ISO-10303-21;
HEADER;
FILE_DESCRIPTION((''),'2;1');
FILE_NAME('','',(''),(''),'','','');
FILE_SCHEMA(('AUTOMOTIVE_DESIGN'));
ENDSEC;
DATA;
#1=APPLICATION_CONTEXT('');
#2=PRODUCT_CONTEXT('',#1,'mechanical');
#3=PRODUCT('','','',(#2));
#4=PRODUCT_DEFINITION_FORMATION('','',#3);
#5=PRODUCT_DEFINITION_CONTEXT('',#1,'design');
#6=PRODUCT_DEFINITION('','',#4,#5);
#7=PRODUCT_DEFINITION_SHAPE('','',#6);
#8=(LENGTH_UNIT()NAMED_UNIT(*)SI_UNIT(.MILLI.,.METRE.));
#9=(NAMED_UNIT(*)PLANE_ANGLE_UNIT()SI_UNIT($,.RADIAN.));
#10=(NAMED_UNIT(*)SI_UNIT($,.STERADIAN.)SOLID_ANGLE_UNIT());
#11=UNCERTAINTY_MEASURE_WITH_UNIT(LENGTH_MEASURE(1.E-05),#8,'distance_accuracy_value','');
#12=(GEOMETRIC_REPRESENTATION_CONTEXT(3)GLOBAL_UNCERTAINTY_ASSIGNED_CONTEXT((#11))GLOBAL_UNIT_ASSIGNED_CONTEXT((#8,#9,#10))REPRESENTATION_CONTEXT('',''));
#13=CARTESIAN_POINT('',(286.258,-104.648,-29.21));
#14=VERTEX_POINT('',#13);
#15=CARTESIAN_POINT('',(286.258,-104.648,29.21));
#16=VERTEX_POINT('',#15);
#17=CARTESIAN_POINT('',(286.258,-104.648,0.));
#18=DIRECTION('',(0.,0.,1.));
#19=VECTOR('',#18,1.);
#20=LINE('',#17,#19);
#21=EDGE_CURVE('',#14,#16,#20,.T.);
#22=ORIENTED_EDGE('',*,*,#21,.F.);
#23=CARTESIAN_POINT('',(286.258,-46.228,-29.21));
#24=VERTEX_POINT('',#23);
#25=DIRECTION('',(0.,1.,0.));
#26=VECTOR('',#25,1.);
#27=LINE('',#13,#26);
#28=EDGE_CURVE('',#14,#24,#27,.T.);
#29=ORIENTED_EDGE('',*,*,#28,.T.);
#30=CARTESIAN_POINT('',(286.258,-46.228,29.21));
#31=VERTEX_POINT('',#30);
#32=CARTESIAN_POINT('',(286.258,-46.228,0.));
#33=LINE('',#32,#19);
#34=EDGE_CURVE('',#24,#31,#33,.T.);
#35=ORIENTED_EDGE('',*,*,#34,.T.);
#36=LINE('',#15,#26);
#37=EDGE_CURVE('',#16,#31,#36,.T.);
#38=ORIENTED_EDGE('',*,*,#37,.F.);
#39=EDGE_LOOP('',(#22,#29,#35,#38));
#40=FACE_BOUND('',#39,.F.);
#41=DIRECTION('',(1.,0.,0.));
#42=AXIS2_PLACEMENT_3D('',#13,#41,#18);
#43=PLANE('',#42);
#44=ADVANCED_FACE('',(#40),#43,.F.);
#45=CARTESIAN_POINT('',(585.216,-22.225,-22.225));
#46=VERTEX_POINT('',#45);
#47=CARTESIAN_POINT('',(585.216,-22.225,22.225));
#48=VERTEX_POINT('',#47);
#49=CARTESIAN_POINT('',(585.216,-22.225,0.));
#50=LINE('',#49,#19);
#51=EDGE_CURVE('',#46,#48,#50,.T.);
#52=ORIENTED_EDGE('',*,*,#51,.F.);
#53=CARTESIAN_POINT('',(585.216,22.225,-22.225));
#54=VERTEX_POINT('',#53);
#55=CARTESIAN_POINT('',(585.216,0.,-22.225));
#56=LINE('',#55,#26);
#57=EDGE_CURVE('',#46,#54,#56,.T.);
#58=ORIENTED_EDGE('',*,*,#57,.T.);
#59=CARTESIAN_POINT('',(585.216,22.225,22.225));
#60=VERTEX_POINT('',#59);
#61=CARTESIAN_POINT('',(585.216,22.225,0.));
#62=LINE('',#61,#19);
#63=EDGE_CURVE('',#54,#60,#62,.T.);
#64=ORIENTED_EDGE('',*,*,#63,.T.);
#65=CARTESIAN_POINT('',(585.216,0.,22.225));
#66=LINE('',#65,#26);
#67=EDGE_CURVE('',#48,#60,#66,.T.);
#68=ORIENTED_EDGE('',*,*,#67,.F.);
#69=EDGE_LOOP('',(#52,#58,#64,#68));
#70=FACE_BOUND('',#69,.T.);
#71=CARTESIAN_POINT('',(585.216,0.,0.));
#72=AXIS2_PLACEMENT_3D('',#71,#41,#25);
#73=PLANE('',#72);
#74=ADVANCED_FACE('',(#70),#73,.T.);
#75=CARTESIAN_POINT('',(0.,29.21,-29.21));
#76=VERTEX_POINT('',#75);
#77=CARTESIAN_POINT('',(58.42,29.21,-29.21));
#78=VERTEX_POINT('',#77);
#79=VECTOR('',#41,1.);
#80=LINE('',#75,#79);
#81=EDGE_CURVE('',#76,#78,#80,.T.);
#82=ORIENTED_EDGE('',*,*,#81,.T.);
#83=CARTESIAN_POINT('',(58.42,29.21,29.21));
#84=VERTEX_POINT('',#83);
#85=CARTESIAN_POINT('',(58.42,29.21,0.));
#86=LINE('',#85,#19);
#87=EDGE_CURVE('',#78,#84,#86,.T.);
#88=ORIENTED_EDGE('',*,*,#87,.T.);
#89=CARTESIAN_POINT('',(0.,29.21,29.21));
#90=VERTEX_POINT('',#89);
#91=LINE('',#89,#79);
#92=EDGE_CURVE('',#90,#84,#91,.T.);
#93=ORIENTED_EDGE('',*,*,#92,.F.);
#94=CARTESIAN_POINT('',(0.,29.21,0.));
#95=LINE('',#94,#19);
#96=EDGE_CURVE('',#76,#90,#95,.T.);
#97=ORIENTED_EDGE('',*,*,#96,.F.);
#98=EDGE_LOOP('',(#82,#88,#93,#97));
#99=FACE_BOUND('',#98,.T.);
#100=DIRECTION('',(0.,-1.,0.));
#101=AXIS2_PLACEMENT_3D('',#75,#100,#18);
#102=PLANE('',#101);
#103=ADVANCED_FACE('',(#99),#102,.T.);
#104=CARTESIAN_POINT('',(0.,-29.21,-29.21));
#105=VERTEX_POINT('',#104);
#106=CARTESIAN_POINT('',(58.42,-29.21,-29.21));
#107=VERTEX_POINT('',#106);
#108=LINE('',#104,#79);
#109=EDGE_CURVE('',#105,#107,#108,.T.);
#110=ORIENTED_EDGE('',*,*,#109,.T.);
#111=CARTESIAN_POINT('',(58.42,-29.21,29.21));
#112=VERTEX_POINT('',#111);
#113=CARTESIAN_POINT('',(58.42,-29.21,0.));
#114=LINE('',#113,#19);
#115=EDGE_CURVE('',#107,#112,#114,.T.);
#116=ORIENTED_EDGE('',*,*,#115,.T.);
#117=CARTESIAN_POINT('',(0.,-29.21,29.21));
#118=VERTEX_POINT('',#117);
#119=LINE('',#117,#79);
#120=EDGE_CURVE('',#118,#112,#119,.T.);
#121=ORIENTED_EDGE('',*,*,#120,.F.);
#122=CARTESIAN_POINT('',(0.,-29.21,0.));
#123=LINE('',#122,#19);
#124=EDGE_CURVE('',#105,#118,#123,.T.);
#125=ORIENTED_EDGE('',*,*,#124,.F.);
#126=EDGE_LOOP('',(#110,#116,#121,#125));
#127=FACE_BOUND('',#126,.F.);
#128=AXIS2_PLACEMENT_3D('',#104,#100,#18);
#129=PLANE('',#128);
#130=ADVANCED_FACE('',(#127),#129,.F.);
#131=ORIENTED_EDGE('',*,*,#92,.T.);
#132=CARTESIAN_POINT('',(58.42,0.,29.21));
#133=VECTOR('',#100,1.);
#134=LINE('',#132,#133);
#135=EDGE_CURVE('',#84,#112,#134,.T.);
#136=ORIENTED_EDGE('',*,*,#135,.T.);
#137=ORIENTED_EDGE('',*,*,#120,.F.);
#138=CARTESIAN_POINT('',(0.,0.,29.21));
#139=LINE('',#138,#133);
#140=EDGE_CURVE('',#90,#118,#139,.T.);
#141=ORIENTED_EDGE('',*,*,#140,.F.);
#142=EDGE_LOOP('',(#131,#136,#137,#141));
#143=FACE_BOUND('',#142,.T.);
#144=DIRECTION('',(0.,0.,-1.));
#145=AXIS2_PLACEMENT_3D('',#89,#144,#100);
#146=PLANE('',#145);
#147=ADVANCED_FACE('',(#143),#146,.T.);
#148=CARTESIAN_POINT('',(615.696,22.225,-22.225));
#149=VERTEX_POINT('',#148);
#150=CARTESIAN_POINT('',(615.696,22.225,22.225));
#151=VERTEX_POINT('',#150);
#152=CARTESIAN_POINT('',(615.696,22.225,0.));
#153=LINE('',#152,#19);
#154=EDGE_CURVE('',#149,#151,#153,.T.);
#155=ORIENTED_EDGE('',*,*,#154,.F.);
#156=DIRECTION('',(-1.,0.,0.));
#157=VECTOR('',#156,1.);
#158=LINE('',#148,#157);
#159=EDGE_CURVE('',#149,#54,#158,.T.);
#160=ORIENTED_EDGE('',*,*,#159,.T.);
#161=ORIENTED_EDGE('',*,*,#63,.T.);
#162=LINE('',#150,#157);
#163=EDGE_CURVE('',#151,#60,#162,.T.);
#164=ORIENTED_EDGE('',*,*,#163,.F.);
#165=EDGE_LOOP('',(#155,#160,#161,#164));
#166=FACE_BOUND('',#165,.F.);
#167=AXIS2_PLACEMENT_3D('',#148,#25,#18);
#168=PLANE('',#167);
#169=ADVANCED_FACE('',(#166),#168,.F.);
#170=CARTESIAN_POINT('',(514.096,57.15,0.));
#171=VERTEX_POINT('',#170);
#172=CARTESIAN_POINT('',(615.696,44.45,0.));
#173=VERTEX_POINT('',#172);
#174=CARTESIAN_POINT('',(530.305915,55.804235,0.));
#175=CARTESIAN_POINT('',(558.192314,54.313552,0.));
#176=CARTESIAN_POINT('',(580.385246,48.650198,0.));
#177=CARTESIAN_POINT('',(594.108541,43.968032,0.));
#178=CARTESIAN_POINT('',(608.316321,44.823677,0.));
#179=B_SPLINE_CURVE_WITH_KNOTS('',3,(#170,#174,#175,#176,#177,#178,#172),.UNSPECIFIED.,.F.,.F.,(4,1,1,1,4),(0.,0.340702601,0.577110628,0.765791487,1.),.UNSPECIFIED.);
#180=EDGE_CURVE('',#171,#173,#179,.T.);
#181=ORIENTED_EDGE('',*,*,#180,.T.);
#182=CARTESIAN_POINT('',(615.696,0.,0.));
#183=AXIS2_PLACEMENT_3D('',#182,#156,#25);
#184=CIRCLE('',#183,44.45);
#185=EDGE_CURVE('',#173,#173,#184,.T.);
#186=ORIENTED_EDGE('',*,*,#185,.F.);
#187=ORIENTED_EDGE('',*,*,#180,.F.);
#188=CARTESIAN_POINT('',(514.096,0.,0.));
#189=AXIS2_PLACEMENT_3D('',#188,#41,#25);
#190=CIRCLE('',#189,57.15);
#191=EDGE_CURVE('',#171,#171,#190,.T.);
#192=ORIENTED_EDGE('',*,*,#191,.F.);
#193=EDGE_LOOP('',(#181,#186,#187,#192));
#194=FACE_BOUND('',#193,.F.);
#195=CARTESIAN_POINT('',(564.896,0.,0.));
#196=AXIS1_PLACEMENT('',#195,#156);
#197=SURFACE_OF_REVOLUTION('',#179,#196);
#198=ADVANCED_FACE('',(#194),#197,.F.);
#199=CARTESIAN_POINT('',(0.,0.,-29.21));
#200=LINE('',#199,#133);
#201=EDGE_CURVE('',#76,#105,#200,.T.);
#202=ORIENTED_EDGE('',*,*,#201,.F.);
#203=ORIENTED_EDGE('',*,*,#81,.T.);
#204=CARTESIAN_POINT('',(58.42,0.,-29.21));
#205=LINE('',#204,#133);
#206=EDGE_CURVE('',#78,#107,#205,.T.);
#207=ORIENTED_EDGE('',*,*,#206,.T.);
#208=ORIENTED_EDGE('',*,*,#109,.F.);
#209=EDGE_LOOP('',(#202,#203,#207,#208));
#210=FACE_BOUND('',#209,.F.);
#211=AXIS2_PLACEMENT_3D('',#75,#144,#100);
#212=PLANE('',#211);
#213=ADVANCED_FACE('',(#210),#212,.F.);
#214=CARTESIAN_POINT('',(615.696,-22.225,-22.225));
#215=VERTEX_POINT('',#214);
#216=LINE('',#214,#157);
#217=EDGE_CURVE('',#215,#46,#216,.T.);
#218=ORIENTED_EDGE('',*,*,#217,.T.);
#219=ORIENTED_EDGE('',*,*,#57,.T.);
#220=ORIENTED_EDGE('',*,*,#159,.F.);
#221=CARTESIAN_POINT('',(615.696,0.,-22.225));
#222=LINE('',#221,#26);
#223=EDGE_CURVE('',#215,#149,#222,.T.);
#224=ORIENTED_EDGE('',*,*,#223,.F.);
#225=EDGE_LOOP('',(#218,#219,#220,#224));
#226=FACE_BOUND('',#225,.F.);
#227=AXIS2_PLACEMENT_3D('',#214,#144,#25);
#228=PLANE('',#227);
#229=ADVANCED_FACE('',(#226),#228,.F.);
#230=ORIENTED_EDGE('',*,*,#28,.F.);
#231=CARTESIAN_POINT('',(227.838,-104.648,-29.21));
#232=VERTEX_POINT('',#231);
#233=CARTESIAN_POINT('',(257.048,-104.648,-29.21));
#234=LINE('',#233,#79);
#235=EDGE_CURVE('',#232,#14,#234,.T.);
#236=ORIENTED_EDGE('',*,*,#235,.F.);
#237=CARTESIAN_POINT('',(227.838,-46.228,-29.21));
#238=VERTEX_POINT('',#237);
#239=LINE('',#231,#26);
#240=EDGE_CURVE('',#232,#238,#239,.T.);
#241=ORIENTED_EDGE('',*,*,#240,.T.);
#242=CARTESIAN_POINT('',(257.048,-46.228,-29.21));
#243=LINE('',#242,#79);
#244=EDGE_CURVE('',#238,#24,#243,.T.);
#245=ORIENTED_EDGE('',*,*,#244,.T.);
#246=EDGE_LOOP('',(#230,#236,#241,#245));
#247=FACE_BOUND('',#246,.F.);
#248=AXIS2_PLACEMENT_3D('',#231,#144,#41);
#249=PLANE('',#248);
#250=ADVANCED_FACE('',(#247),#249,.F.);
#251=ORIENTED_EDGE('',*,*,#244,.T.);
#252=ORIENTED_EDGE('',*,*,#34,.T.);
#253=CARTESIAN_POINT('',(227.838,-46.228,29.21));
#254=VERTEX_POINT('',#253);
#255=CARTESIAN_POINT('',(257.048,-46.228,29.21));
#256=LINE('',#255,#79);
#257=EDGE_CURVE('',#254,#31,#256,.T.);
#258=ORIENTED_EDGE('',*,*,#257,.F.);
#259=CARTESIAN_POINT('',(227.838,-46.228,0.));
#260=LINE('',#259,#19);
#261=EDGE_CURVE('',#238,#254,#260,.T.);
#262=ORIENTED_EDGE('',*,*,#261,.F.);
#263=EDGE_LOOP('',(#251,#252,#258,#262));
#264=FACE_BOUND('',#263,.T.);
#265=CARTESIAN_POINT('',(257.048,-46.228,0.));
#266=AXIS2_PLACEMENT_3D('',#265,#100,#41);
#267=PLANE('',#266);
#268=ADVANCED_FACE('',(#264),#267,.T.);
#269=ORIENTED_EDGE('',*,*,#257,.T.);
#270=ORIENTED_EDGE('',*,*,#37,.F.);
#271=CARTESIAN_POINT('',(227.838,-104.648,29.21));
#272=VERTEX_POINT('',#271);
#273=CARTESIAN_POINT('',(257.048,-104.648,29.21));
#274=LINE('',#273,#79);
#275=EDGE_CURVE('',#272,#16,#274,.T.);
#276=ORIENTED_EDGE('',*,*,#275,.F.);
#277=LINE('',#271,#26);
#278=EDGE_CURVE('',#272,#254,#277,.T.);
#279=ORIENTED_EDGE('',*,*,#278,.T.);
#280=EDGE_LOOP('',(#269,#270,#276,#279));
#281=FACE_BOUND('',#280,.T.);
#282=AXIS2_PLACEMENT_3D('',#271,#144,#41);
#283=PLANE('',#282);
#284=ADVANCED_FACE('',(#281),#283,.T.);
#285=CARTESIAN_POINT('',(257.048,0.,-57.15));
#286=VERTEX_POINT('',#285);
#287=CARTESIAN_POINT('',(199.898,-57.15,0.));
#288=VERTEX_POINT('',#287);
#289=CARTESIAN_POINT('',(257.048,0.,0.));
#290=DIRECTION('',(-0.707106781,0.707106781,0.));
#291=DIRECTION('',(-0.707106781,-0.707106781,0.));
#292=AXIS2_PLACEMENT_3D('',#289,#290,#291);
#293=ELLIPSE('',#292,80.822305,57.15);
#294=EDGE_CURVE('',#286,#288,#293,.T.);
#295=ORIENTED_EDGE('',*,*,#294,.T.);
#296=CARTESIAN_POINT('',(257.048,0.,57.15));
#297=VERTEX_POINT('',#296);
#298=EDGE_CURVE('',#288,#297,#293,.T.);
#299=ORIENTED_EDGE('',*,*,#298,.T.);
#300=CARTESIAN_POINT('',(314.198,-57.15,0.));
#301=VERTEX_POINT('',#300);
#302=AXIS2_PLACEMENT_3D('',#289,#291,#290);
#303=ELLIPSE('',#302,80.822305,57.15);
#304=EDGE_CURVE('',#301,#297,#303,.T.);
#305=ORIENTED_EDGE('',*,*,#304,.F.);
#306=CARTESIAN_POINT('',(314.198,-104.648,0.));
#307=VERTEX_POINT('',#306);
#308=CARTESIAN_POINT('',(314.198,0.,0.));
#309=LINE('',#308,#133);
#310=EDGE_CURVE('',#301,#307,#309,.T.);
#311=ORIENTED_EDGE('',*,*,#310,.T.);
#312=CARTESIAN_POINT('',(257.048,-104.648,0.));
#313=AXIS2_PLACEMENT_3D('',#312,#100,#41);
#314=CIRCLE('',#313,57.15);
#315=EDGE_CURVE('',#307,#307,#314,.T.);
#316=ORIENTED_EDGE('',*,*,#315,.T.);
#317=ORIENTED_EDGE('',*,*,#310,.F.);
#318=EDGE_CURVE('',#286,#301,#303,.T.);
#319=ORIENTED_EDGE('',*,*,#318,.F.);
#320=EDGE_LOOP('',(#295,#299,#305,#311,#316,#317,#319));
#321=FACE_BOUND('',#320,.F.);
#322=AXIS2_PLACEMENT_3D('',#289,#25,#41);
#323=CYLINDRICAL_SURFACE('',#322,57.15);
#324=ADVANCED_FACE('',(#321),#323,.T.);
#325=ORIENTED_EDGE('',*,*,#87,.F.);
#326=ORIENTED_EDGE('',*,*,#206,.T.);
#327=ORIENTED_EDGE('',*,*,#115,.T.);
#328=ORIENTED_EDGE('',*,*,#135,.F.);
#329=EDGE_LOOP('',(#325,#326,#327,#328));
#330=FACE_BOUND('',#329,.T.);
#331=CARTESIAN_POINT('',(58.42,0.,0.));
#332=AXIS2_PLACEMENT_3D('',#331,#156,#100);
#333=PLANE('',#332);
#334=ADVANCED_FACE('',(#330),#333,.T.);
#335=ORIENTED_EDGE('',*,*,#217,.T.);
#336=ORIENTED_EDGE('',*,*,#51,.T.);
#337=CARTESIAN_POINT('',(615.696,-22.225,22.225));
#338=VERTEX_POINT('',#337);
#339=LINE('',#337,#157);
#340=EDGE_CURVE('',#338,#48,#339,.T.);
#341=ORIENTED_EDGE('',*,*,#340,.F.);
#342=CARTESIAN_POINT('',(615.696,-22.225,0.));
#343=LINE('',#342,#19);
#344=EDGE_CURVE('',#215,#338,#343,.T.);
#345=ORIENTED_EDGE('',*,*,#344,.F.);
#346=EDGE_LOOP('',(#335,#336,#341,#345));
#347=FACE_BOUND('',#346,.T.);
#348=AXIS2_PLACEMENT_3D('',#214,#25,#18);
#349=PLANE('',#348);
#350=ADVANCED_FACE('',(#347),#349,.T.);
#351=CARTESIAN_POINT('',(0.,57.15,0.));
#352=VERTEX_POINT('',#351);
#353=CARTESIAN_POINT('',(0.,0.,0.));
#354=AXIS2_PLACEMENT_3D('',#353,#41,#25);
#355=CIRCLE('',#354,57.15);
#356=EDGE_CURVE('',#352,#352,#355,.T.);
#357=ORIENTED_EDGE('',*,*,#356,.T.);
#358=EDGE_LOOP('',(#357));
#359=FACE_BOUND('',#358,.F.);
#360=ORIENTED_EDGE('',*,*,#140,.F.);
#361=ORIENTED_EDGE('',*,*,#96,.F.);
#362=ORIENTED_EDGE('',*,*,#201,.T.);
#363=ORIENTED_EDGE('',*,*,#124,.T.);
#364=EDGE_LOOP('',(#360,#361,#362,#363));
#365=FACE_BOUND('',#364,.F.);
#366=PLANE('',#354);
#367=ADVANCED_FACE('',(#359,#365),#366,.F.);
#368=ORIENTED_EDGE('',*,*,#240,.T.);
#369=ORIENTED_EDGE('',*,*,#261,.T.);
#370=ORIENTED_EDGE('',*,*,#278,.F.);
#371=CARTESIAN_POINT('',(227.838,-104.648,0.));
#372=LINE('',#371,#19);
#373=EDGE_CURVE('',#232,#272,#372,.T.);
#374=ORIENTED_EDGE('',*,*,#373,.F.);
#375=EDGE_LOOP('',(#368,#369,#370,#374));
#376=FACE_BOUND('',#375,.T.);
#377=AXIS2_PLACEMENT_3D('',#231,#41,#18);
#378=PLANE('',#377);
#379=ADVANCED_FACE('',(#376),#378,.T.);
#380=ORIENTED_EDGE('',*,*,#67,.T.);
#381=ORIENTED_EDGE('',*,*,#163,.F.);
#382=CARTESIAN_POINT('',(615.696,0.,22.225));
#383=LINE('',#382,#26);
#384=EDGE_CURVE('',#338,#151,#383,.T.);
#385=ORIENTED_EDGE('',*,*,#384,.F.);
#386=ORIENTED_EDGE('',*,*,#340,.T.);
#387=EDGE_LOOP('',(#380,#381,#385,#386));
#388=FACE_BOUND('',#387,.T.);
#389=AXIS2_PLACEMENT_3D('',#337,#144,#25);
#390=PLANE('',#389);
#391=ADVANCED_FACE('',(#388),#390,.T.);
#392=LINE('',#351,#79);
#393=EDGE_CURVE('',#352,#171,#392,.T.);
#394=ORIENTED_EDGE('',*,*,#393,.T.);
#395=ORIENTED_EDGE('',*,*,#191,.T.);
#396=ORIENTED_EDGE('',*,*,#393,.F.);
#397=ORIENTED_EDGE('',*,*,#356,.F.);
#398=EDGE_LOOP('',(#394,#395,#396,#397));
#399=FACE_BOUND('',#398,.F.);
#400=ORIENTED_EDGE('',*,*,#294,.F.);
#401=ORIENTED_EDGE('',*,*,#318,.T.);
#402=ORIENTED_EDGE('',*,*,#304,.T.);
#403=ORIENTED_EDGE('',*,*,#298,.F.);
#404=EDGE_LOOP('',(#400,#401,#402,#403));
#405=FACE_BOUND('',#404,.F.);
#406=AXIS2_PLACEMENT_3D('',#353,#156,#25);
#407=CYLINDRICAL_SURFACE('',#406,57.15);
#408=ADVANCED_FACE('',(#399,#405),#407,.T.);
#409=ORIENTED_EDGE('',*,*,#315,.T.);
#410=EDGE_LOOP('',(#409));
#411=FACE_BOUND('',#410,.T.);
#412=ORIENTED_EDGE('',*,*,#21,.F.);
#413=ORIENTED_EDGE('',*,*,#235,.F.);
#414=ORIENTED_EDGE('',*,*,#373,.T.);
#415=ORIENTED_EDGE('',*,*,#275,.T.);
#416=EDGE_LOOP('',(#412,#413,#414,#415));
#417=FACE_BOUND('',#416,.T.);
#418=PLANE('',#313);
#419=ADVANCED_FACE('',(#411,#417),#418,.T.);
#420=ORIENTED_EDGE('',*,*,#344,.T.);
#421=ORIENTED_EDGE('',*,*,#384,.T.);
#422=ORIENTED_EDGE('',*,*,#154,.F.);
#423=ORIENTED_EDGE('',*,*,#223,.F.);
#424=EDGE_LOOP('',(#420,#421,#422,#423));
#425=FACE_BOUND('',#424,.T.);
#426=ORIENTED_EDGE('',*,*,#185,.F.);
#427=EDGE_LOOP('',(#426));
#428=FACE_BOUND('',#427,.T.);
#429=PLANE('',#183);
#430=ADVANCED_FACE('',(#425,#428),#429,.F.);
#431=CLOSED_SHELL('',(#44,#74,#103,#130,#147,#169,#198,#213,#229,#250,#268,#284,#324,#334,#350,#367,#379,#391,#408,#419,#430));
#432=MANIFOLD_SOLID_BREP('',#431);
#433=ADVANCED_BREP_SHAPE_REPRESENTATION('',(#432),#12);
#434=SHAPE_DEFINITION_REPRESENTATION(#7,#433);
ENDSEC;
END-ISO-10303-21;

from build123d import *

# Parameters (mm, degrees)
F0_R      = 57.15
F3_DEPTH  = 514.096
F2_R      = 57.15
F5_DEPTH  = 104.648
F6_W      = 58.42
F6_H      = 58.42
F7_DEPTH  = 58.42
F8_W      = 58.42
F8_H      = 58.42
F9_DEPTH  = 58.42
F10_W     = 44.45
F10_H     = 44.45
F11_DEPTH = 30.48


# Not quite as in the source:
# - a feature names something its author has since deleted; it is built from what else it names


with BuildPart() as f3:
    # F0 (on Right) → F3 (new body)
    with BuildSketch(Plane.YZ):
        Circle(F0_R)
    extrude(amount=F3_DEPTH)

    # F1 (on Top) → F4 (revolve)
    with BuildSketch(Plane.XY):
        with BuildLine():
            Line((514.096, 57.15), (514.096, 0))
            Line((514.096, 0), (615.696, 0))
            Line((615.696, 0), (615.696, 44.45))
            add(Edge.make_bspline(
                [(514.096, 57.15), (530.3059150596, 55.8042351211), (558.1923144484, 54.3135523686), (580.3852464856, 48.6501982027), (594.1085406783, 43.9680323111), (608.3163207178, 44.8236773325), (615.696, 44.45)],
                knots=[0, 0, 0, 0, 0.3407026007, 0.5771106283, 0.7657914869, 1, 1, 1, 1], degree=3))
        make_face()
    revolve(axis=Axis((564.896, 0, 0), (-1, 0, 0)))

    # F2 (on Front) → F5 (join)
    with BuildSketch(Plane.XZ):
        with Locations((257.048, 0)):
            Circle(F2_R)
    extrude(amount=F5_DEPTH)

    # F6 (on face) → F7 (cut)
    with BuildSketch(Plane(origin=(0, 0, 0), x_dir=(0, -1, 0), z_dir=(-1, 0, 0))):
        Rectangle(F6_W, F6_H)
    extrude(amount=-F7_DEPTH, mode=Mode.SUBTRACT)

    # F8 (on face) → F9 (cut)
    with BuildSketch(Plane.XZ.offset(104.648)):
        with Locations((257.048, 0)):
            Rectangle(F8_W, F8_H)
    extrude(amount=-F9_DEPTH, mode=Mode.SUBTRACT)

    # F10 (on face) → F11 (cut)
    with BuildSketch(Plane.YZ.offset(615.696)):
        Rectangle(F10_W, F10_H)
    extrude(amount=-F11_DEPTH, mode=Mode.SUBTRACT)


solid = f3.part
